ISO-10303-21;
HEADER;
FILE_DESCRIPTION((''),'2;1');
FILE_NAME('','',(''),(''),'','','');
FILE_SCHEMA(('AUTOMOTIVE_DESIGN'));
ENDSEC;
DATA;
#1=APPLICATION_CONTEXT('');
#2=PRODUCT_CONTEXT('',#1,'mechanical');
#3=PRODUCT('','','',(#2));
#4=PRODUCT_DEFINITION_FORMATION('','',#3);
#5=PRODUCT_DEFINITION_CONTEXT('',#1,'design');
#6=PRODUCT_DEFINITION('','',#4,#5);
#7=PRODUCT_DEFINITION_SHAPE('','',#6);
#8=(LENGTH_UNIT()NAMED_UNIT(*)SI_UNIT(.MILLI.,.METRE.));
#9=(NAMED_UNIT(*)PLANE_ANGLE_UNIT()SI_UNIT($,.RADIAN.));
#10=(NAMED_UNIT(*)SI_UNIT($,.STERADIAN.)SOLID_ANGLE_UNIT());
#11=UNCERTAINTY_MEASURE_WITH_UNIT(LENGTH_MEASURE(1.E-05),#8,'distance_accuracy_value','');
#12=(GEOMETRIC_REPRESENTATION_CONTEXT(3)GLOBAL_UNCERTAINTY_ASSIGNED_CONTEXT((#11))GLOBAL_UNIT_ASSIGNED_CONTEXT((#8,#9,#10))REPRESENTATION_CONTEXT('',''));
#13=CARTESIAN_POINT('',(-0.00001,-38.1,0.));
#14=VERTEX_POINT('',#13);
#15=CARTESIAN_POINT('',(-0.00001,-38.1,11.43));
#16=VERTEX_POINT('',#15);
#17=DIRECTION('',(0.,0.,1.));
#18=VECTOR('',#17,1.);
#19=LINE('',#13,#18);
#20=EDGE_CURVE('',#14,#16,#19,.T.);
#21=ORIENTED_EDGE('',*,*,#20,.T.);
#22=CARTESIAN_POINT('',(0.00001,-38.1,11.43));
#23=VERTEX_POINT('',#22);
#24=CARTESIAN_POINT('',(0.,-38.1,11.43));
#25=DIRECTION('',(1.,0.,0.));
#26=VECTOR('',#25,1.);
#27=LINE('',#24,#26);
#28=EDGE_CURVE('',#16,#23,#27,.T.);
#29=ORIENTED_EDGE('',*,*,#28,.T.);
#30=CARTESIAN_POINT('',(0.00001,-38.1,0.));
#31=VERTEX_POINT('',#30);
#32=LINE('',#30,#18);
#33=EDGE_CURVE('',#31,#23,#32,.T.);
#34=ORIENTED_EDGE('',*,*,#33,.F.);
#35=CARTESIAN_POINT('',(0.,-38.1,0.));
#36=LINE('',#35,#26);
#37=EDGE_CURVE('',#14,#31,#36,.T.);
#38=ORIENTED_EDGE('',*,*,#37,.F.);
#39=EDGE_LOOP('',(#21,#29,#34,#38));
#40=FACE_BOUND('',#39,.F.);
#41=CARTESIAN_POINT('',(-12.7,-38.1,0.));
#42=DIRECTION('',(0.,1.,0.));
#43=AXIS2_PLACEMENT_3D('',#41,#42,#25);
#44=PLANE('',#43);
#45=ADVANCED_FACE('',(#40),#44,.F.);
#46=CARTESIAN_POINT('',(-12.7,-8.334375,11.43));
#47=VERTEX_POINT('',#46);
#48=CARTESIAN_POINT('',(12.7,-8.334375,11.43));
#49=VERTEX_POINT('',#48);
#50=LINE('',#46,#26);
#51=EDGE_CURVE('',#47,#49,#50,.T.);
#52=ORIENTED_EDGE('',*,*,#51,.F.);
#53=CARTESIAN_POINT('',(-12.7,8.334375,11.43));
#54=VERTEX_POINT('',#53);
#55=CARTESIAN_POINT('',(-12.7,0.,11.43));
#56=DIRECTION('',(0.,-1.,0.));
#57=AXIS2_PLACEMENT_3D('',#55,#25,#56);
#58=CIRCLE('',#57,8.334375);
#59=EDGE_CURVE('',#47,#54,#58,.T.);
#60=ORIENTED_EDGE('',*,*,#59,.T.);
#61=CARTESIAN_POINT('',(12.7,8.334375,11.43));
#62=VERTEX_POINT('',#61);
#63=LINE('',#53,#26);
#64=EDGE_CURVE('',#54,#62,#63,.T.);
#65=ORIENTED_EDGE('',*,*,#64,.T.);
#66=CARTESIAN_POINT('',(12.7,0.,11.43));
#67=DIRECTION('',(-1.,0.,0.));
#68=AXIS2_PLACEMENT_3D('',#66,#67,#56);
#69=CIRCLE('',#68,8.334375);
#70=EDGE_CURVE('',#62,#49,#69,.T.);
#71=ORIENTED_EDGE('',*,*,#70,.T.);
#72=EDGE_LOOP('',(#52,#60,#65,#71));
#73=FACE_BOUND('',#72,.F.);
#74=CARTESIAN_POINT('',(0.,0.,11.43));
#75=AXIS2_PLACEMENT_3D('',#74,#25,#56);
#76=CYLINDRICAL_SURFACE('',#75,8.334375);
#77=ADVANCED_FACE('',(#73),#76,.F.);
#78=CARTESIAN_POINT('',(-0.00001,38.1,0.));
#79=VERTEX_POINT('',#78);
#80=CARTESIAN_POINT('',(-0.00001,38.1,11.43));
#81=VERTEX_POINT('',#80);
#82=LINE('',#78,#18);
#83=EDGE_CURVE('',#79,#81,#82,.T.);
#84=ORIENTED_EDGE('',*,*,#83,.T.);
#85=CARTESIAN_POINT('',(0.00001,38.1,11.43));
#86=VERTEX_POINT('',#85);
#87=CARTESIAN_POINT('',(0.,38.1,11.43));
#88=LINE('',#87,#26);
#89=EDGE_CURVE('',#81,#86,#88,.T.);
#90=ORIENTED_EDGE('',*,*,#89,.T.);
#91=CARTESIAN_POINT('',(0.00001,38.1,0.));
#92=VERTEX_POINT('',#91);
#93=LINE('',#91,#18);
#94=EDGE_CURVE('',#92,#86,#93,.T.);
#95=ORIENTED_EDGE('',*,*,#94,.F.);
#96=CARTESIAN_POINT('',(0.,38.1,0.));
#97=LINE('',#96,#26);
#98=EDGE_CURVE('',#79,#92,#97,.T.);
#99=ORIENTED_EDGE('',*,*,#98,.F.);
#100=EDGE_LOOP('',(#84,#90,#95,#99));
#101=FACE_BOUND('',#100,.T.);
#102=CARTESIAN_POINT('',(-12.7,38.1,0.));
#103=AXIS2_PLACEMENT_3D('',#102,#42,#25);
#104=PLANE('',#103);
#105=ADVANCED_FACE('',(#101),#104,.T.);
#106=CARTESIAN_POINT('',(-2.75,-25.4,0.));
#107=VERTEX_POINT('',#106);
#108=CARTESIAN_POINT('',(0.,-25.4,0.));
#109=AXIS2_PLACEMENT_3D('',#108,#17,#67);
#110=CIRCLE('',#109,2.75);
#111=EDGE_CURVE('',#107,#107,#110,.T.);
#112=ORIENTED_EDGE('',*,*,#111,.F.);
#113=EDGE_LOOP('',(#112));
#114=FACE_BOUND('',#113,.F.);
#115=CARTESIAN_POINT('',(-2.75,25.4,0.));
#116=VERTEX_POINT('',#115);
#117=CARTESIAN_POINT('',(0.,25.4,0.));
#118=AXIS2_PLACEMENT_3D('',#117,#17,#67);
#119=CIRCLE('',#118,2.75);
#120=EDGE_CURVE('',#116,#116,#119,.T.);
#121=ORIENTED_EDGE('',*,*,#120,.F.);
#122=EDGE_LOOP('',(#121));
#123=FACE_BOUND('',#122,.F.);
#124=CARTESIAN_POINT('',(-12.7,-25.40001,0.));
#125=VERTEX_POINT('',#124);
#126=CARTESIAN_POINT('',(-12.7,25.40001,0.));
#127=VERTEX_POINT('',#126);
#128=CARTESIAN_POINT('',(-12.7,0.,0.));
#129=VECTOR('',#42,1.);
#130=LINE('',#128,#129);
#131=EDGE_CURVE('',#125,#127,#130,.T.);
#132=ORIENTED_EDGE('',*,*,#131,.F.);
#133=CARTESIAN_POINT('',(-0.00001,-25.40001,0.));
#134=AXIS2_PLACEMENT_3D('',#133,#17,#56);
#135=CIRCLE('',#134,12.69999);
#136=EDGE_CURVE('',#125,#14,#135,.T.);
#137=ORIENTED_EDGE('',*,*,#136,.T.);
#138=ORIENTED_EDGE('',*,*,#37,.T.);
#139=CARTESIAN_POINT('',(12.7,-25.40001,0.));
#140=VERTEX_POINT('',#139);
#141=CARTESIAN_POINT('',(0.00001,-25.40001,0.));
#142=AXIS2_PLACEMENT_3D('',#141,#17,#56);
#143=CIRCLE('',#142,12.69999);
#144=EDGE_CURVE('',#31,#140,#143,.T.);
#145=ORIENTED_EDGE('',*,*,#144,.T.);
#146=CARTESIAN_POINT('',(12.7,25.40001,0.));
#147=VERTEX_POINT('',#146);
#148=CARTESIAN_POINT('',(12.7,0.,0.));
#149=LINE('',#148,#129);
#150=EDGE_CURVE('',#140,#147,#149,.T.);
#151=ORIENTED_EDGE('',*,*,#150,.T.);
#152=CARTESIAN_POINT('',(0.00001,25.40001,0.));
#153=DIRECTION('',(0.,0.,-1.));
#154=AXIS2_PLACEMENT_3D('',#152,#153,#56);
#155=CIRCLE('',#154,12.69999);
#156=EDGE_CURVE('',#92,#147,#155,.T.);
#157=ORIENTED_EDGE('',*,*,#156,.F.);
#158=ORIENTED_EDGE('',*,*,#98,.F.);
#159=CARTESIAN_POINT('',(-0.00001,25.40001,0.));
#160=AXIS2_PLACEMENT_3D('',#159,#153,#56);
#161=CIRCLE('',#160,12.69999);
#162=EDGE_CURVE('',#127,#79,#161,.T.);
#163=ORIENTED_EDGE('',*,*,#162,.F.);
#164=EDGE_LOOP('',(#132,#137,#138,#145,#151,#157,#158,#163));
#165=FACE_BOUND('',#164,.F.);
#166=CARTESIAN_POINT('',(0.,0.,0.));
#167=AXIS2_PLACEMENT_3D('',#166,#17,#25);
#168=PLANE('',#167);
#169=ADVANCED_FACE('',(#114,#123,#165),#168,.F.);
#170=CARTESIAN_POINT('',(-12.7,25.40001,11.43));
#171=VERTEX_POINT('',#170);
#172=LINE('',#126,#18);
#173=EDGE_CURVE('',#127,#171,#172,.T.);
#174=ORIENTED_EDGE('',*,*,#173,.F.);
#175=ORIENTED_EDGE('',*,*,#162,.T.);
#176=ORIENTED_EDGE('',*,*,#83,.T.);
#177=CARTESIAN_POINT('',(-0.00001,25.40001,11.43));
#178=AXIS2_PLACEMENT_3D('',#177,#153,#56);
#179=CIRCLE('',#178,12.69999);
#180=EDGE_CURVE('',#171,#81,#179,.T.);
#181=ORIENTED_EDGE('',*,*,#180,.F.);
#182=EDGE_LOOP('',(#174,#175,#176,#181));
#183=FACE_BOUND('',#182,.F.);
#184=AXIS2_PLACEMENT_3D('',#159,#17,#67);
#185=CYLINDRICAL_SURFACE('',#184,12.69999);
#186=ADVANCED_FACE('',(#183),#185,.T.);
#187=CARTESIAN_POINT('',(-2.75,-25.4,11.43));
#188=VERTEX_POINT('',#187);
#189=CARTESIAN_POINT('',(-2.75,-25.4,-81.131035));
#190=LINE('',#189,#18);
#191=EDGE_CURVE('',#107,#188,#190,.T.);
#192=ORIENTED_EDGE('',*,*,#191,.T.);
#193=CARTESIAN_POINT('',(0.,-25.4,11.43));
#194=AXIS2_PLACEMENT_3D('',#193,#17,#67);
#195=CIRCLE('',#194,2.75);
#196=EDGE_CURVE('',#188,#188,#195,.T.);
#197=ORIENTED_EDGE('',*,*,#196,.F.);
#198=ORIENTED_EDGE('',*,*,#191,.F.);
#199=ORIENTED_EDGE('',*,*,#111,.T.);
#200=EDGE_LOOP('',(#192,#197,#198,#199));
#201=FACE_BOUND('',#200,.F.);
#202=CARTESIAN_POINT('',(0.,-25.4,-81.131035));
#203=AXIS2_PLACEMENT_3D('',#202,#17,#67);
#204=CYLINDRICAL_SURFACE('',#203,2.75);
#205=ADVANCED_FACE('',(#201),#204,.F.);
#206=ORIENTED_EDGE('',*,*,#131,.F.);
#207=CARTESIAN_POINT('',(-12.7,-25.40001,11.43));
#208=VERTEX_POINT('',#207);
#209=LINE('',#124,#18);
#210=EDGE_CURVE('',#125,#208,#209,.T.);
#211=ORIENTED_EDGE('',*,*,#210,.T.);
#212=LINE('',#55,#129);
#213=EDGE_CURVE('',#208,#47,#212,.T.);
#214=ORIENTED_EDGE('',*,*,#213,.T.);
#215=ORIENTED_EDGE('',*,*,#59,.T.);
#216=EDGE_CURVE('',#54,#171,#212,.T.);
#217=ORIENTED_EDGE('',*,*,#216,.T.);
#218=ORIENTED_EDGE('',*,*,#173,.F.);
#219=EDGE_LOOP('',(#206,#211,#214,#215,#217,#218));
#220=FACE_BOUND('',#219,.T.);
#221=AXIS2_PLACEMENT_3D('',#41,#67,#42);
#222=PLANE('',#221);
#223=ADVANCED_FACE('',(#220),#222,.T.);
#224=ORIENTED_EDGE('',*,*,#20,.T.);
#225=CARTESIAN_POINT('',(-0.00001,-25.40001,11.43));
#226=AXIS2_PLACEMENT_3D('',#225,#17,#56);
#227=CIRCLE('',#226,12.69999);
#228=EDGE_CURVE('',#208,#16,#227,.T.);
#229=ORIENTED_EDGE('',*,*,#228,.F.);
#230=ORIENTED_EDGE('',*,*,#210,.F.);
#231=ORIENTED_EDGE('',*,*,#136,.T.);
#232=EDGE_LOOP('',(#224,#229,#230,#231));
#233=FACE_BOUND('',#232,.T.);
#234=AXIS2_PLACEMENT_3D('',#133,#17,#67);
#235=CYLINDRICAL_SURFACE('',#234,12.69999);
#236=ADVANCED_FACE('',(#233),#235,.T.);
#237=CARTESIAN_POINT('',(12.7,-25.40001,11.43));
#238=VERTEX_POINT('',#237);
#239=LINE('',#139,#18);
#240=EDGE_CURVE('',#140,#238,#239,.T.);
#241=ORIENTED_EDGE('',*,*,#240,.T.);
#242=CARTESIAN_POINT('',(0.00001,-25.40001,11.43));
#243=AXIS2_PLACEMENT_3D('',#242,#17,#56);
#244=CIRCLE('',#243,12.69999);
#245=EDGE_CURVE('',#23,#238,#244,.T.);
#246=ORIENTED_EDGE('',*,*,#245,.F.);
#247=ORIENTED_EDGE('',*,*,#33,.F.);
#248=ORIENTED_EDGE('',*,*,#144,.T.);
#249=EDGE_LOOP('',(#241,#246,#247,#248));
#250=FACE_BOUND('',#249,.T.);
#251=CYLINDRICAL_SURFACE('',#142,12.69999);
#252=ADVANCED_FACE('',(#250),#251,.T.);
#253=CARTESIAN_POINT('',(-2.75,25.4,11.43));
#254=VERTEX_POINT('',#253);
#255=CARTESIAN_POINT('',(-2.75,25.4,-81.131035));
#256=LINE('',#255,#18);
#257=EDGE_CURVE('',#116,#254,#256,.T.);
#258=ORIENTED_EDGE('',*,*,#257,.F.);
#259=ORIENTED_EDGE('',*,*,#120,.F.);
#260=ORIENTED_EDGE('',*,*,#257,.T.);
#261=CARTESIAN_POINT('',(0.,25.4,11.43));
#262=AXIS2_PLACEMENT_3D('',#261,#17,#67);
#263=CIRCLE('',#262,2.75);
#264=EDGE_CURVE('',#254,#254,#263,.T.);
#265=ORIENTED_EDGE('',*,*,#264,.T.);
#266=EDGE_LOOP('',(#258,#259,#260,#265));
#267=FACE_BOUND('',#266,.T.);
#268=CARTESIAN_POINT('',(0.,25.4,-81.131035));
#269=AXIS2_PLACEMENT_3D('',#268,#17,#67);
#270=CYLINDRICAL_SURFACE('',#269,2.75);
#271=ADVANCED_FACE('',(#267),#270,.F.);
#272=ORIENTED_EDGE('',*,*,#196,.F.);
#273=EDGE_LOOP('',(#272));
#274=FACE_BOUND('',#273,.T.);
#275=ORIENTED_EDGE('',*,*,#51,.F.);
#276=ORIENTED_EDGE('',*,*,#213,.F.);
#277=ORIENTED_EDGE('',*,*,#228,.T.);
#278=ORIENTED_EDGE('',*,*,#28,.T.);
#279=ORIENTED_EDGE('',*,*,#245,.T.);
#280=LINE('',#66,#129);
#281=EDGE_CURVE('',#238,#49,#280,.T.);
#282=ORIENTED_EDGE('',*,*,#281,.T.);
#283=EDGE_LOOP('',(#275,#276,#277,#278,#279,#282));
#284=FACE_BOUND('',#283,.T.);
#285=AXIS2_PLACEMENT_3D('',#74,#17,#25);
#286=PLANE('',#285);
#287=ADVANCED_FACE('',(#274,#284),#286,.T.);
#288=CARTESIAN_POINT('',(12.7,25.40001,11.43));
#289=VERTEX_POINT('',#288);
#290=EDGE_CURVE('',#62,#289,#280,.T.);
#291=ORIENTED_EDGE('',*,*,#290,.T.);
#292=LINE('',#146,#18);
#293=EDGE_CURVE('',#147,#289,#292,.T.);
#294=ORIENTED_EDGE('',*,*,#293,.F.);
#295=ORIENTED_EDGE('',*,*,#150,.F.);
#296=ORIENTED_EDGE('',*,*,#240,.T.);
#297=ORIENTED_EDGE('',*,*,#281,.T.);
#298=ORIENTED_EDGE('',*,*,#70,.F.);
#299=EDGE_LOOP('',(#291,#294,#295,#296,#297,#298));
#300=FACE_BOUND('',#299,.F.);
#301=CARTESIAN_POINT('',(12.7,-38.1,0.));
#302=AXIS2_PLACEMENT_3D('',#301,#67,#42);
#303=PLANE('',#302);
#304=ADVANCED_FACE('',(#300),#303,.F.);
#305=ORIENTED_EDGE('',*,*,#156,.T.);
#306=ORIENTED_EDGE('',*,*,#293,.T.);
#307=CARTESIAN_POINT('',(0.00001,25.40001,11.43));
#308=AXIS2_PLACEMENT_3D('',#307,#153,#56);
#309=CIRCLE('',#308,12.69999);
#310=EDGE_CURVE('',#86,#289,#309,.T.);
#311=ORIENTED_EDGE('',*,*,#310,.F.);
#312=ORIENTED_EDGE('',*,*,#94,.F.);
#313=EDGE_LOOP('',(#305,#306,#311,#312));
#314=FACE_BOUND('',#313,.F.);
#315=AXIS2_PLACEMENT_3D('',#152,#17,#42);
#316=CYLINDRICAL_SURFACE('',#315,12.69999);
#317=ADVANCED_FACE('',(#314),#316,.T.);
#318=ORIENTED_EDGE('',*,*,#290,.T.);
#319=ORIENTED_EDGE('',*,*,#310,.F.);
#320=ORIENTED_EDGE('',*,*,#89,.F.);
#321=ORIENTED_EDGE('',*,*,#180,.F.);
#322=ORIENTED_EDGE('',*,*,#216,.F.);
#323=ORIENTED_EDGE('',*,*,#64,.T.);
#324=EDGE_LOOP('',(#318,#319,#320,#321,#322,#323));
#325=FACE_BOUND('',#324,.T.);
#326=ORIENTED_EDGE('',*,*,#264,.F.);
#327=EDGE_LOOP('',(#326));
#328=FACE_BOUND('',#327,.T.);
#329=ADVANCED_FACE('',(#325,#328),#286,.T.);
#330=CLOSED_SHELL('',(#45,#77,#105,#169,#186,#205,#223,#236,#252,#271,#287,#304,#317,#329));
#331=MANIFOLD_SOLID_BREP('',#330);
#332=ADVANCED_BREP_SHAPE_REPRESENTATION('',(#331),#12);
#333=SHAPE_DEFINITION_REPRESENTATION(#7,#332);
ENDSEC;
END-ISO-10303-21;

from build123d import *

# Parameters (mm, degrees)
F0_W          = 25.4
F0_H          = 76.2
F1_DEPTH      = 11.43
F3_DEPTH      = 12.701
F3_DEPTH_BACK = 12.701
F5_D          = 5.5
F6_R          = 12.69999


# Not quite as in the source:
# - a fillet or chamfer is up to 0.001 mm smaller than in the source, because OpenCascade refuses the exact size
# - a pattern or mirror of a feature is missing from the dataset's text; its kind, count and spacing are read off the source's solid


with BuildPart() as f1:
    # F0 (on Top) → F1 (new body)
    with BuildSketch(Plane.XY):
        Rectangle(F0_W, F0_H)
    extrude(amount=F1_DEPTH)

    # F2 (on Right) → F3 (cut, two sides)
    with BuildSketch(Plane.YZ) as f3_sk:
        with BuildLine():
            Line((8.334375, 11.43), (-8.334375, 11.43))
            ThreePointArc((-8.334375, 11.43), (0, 3.095625), (8.334375, 11.43))
        make_face()
    extrude(amount=-F3_DEPTH, mode=Mode.SUBTRACT)
    extrude(f3_sk.sketch, amount=F3_DEPTH_BACK, mode=Mode.SUBTRACT)

    # F5 (through all)
    with Locations(Plane(origin=(0, 0, 0), x_dir=(1, 0, 0), z_dir=(0, 0, -1))):
        with Locations((0, 25.4)):
            f5 = Hole(F5_D / 2)

    # F5_copies: F5 across plane
    add(f5.mirror(Plane.ZX), mode=Mode.SUBTRACT)

    # F6 (radius 12.7 in the source; OpenCascade refuses exactly that, so slightly less here)
    f6_edges = [f1.edges().sort_by_distance(p)[0] for p in [
        (-12.7, -38.1, 5.715),
        (12.7, -38.1, 5.715),
        (-12.7, 38.1, 5.715),
        (12.7, 38.1, 5.715),
    ]]
    fillet(f6_edges, radius=F6_R)


solid = f1.part
